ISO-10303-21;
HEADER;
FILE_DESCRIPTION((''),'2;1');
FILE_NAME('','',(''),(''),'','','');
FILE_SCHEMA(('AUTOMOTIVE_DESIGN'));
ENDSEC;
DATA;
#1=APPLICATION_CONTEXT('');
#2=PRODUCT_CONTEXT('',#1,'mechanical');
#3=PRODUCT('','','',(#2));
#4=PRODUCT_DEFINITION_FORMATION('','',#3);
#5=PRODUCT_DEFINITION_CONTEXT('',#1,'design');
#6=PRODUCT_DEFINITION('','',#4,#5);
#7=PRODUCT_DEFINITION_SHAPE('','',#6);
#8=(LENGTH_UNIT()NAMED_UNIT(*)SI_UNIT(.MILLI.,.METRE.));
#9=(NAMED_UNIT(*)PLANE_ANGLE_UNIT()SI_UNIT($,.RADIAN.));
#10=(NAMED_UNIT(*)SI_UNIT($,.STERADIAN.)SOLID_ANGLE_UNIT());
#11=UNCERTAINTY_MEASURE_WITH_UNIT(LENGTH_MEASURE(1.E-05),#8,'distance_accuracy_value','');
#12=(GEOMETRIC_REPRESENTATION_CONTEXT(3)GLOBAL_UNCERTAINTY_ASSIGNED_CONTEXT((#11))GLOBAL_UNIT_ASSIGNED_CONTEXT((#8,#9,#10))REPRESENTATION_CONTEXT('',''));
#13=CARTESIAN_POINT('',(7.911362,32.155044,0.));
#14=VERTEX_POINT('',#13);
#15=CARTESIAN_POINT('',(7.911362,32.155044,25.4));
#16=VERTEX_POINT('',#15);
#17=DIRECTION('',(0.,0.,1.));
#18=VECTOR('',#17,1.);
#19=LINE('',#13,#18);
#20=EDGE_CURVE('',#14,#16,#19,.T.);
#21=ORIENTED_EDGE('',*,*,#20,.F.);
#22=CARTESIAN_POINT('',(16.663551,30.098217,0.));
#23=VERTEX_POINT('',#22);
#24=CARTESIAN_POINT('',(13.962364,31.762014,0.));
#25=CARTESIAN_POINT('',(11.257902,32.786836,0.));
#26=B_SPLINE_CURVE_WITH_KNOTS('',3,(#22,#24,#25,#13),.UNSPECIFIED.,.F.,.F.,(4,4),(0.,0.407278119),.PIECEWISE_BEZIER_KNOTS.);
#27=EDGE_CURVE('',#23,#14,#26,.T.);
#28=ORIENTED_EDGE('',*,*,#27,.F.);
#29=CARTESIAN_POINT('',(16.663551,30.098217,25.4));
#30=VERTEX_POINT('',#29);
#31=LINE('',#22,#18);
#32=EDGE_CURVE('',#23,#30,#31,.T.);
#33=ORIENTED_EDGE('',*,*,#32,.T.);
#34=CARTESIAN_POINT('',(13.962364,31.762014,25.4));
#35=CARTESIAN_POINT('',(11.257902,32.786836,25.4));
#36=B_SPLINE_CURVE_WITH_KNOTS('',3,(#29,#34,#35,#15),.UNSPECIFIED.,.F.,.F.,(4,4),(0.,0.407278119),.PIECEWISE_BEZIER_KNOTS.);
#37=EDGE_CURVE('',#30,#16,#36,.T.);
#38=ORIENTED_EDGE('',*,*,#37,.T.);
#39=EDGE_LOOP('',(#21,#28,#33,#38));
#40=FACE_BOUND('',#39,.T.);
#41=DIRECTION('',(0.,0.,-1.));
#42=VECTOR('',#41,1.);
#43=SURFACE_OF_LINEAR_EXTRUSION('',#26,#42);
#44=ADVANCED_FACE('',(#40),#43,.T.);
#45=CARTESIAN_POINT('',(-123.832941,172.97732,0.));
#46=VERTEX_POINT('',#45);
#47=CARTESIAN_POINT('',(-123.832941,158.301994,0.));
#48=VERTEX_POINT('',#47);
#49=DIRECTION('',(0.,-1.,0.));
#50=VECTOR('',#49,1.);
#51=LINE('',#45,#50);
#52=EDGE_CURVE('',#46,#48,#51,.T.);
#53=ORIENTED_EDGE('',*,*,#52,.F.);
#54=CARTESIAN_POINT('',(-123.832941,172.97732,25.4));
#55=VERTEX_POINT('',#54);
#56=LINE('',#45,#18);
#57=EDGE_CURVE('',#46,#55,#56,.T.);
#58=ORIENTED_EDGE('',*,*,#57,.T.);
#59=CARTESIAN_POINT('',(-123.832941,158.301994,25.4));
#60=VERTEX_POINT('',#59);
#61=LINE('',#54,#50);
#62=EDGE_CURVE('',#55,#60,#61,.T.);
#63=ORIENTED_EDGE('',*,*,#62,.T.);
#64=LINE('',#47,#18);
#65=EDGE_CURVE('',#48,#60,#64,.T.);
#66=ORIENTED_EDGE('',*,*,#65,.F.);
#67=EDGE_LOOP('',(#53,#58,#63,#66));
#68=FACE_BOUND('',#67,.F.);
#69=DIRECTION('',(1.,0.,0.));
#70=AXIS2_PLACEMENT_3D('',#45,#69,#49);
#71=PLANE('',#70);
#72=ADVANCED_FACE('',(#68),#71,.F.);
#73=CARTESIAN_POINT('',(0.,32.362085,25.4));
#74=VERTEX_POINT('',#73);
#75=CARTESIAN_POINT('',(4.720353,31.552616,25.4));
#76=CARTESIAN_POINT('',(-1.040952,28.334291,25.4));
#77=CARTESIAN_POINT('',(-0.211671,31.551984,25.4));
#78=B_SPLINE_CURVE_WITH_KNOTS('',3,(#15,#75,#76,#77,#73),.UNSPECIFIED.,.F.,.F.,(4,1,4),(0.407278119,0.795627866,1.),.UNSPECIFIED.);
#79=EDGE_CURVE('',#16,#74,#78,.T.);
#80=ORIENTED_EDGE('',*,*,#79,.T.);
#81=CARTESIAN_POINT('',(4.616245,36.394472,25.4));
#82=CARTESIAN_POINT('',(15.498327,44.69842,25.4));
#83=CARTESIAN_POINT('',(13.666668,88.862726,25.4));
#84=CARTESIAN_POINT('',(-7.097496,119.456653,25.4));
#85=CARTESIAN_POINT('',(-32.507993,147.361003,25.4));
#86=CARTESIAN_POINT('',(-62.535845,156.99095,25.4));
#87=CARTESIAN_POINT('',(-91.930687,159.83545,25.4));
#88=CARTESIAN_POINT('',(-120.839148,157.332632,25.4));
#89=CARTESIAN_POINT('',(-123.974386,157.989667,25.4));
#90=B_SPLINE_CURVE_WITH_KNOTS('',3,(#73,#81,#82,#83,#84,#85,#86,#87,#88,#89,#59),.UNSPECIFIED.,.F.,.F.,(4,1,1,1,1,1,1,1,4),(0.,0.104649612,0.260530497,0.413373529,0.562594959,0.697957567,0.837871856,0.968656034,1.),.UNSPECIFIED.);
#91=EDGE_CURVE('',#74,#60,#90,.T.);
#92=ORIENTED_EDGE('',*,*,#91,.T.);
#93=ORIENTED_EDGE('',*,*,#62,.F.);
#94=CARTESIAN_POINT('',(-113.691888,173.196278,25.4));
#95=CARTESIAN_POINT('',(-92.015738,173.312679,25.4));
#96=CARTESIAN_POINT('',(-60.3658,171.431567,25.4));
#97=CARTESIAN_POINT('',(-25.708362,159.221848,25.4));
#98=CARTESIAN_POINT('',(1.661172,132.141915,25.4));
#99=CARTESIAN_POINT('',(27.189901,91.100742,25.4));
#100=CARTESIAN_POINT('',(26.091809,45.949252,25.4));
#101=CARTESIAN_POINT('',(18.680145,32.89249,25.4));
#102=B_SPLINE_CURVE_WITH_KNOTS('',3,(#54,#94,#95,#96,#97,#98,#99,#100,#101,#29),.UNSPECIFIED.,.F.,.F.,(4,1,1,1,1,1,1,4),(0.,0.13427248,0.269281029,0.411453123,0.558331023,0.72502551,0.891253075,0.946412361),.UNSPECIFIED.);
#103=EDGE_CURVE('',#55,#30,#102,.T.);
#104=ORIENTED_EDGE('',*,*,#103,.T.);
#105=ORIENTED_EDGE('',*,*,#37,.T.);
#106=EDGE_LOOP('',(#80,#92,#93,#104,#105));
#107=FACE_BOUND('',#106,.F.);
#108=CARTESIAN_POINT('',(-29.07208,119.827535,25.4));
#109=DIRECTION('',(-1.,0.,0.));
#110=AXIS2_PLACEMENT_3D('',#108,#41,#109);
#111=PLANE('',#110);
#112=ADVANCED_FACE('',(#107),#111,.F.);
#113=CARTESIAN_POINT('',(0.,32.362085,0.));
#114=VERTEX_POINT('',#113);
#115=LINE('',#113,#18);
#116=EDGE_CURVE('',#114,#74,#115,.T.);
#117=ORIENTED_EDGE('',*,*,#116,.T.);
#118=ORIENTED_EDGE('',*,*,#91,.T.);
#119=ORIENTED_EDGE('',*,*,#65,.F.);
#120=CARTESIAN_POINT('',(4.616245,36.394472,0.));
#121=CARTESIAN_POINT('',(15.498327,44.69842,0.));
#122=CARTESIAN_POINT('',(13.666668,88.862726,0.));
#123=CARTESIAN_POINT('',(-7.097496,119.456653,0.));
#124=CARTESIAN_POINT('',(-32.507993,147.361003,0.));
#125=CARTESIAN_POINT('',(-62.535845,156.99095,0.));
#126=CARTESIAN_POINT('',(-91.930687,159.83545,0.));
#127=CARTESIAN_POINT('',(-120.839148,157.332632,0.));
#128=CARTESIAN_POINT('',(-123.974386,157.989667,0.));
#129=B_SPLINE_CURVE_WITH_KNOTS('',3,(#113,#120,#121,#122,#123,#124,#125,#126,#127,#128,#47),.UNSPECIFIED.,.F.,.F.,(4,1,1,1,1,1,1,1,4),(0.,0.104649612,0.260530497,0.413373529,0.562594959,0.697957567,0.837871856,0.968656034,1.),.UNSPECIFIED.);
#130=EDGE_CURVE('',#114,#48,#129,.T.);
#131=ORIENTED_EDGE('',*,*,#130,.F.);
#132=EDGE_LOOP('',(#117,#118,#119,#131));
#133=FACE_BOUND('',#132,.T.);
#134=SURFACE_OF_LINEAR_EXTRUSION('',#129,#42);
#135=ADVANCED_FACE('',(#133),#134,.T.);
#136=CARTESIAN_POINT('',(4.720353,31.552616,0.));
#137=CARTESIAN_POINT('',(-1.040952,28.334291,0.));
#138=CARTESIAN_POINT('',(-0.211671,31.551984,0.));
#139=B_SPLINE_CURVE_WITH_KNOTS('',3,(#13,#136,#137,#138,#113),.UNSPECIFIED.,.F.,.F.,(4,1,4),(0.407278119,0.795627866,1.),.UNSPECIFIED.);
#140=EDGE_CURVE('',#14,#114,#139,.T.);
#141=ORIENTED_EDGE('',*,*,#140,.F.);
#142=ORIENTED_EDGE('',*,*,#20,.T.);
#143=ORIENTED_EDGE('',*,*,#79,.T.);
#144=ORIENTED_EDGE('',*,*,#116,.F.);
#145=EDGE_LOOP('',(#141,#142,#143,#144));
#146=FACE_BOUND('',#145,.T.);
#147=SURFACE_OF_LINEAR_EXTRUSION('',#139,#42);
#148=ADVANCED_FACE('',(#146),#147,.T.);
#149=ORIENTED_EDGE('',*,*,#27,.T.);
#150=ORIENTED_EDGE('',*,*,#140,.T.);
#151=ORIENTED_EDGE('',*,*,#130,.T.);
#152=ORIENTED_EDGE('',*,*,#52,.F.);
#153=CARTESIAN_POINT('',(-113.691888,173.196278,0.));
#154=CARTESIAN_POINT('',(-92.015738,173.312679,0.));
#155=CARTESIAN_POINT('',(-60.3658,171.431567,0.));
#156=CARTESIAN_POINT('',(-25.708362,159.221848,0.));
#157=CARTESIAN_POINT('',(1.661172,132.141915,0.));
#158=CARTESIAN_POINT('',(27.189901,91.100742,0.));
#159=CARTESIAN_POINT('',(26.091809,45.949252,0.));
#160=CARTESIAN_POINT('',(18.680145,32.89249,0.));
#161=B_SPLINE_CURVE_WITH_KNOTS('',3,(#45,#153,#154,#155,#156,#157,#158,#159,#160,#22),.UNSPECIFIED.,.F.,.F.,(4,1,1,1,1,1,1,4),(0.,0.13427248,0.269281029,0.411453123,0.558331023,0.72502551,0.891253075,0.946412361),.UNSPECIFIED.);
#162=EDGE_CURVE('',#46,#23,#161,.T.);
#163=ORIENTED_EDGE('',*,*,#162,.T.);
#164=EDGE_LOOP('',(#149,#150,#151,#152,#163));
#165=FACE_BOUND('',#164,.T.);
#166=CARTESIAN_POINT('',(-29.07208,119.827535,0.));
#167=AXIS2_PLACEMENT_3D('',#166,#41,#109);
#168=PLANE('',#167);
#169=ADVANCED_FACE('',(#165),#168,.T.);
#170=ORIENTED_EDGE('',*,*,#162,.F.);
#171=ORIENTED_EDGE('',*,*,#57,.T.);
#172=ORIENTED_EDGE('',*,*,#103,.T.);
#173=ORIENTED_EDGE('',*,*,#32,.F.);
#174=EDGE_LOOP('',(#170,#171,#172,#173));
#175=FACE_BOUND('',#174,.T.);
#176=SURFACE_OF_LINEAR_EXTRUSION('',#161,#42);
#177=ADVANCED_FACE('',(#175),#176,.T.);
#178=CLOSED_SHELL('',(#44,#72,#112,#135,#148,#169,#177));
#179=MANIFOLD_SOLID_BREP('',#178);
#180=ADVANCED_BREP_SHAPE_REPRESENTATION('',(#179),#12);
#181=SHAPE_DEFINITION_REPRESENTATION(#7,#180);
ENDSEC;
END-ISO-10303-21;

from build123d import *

# Parameters (mm, degrees)
F1_DEPTH = 25.4


with BuildPart() as f1:
    # F0 (on Top) → F1 (new body)
    with BuildSketch(Plane.XY):
        with BuildLine():
            add(Edge.make_bspline(
                [(0, 32.3620848358), (4.616245299, 36.3944720125), (15.4983274834, 44.6984201373), (13.6666682436, 88.8627259497), (-7.097495706, 119.4566531382), (-32.5079925777, 147.3610034027), (-62.5358454037, 156.9909503606), (-91.9306865929, 159.8354501402), (-120.8391481347, 157.3326324801), (-123.9743855546, 157.9896672991), (-123.8329410553, 158.3019942045)],
                knots=[0, 0, 0, 0, 0.1046496121, 0.2605304968, 0.4133735293, 0.5625949593, 0.6979575673, 0.8378718565, 0.9686560343, 1, 1, 1, 1], degree=3))
            add(Edge.make_bspline(
                [(7.9113617539, 32.1550443769), (4.7203534146, 31.5526155318), (-1.0409519817, 28.3342911106), (-0.2116711823, 31.5519841263), (0, 32.3620848358)],
                knots=[0.4072781194, 0.4072781194, 0.4072781194, 0.4072781194, 0.7956278657, 1, 1, 1, 1], degree=3))
            add(Edge.make_bspline(
                [(16.6635511817, 30.0982165935), (16.7030308183, 30.2622075198), (17.0150531463, 32.7150187131), (10.8724841867, 35.4521642858), (8.5677795334, 33.1385749466), (7.9113617539, 32.1550443769)],
                knots=[0.3546609767, 0.3546609767, 0.3546609767, 0.3546609767, 0.3617589695, 0.4623198499, 0.5097820379, 0.5097820379, 0.5097820379, 0.5097820379], degree=3))
            add(Edge.make_bspline(
                [(-123.8329410553, 172.9773198607), (-113.6918879881, 173.1962776362), (-92.015737529, 173.3126790169), (-60.3657998712, 171.4315667112), (-25.7083616084, 159.2218478032), (1.6611720718, 132.14191491), (27.1899010949, 91.1007415152), (26.0918092721, 45.9492515021), (18.6801450725, 32.8924904799), (16.6635511817, 30.0982165935)],
                knots=[0, 0, 0, 0, 0.1342724804, 0.2692810288, 0.4114531234, 0.5583310233, 0.72502551, 0.8912530752, 0.9464123607, 0.9464123607, 0.9464123607, 0.9464123607], degree=3))
            Line((-123.8329410553, 172.9773198607), (-123.8329410553, 158.3019942045))
        make_face()
        with BuildLine():
            add(Edge.make_bspline(
                [(16.6635511817, 30.0982165935), (16.7030308183, 30.2622075198), (17.0150531463, 32.7150187131), (10.8724841867, 35.4521642858), (8.5677795334, 33.1385749466), (7.9113617539, 32.1550443769)],
                knots=[0.3546609767, 0.3546609767, 0.3546609767, 0.3546609767, 0.3617589695, 0.4623198499, 0.5097820379, 0.5097820379, 0.5097820379, 0.5097820379], degree=3))
            add(Edge.make_bspline(
                [(16.6635511817, 30.0982165935), (13.9623635483, 31.7620139941), (11.2579015364, 32.7868359241), (7.9113617539, 32.1550443769)],
                knots=[0, 0, 0, 0, 0.4072781194, 0.4072781194, 0.4072781194, 0.4072781194], degree=3))
        make_face()
    extrude(amount=F1_DEPTH)


solid = f1.part
